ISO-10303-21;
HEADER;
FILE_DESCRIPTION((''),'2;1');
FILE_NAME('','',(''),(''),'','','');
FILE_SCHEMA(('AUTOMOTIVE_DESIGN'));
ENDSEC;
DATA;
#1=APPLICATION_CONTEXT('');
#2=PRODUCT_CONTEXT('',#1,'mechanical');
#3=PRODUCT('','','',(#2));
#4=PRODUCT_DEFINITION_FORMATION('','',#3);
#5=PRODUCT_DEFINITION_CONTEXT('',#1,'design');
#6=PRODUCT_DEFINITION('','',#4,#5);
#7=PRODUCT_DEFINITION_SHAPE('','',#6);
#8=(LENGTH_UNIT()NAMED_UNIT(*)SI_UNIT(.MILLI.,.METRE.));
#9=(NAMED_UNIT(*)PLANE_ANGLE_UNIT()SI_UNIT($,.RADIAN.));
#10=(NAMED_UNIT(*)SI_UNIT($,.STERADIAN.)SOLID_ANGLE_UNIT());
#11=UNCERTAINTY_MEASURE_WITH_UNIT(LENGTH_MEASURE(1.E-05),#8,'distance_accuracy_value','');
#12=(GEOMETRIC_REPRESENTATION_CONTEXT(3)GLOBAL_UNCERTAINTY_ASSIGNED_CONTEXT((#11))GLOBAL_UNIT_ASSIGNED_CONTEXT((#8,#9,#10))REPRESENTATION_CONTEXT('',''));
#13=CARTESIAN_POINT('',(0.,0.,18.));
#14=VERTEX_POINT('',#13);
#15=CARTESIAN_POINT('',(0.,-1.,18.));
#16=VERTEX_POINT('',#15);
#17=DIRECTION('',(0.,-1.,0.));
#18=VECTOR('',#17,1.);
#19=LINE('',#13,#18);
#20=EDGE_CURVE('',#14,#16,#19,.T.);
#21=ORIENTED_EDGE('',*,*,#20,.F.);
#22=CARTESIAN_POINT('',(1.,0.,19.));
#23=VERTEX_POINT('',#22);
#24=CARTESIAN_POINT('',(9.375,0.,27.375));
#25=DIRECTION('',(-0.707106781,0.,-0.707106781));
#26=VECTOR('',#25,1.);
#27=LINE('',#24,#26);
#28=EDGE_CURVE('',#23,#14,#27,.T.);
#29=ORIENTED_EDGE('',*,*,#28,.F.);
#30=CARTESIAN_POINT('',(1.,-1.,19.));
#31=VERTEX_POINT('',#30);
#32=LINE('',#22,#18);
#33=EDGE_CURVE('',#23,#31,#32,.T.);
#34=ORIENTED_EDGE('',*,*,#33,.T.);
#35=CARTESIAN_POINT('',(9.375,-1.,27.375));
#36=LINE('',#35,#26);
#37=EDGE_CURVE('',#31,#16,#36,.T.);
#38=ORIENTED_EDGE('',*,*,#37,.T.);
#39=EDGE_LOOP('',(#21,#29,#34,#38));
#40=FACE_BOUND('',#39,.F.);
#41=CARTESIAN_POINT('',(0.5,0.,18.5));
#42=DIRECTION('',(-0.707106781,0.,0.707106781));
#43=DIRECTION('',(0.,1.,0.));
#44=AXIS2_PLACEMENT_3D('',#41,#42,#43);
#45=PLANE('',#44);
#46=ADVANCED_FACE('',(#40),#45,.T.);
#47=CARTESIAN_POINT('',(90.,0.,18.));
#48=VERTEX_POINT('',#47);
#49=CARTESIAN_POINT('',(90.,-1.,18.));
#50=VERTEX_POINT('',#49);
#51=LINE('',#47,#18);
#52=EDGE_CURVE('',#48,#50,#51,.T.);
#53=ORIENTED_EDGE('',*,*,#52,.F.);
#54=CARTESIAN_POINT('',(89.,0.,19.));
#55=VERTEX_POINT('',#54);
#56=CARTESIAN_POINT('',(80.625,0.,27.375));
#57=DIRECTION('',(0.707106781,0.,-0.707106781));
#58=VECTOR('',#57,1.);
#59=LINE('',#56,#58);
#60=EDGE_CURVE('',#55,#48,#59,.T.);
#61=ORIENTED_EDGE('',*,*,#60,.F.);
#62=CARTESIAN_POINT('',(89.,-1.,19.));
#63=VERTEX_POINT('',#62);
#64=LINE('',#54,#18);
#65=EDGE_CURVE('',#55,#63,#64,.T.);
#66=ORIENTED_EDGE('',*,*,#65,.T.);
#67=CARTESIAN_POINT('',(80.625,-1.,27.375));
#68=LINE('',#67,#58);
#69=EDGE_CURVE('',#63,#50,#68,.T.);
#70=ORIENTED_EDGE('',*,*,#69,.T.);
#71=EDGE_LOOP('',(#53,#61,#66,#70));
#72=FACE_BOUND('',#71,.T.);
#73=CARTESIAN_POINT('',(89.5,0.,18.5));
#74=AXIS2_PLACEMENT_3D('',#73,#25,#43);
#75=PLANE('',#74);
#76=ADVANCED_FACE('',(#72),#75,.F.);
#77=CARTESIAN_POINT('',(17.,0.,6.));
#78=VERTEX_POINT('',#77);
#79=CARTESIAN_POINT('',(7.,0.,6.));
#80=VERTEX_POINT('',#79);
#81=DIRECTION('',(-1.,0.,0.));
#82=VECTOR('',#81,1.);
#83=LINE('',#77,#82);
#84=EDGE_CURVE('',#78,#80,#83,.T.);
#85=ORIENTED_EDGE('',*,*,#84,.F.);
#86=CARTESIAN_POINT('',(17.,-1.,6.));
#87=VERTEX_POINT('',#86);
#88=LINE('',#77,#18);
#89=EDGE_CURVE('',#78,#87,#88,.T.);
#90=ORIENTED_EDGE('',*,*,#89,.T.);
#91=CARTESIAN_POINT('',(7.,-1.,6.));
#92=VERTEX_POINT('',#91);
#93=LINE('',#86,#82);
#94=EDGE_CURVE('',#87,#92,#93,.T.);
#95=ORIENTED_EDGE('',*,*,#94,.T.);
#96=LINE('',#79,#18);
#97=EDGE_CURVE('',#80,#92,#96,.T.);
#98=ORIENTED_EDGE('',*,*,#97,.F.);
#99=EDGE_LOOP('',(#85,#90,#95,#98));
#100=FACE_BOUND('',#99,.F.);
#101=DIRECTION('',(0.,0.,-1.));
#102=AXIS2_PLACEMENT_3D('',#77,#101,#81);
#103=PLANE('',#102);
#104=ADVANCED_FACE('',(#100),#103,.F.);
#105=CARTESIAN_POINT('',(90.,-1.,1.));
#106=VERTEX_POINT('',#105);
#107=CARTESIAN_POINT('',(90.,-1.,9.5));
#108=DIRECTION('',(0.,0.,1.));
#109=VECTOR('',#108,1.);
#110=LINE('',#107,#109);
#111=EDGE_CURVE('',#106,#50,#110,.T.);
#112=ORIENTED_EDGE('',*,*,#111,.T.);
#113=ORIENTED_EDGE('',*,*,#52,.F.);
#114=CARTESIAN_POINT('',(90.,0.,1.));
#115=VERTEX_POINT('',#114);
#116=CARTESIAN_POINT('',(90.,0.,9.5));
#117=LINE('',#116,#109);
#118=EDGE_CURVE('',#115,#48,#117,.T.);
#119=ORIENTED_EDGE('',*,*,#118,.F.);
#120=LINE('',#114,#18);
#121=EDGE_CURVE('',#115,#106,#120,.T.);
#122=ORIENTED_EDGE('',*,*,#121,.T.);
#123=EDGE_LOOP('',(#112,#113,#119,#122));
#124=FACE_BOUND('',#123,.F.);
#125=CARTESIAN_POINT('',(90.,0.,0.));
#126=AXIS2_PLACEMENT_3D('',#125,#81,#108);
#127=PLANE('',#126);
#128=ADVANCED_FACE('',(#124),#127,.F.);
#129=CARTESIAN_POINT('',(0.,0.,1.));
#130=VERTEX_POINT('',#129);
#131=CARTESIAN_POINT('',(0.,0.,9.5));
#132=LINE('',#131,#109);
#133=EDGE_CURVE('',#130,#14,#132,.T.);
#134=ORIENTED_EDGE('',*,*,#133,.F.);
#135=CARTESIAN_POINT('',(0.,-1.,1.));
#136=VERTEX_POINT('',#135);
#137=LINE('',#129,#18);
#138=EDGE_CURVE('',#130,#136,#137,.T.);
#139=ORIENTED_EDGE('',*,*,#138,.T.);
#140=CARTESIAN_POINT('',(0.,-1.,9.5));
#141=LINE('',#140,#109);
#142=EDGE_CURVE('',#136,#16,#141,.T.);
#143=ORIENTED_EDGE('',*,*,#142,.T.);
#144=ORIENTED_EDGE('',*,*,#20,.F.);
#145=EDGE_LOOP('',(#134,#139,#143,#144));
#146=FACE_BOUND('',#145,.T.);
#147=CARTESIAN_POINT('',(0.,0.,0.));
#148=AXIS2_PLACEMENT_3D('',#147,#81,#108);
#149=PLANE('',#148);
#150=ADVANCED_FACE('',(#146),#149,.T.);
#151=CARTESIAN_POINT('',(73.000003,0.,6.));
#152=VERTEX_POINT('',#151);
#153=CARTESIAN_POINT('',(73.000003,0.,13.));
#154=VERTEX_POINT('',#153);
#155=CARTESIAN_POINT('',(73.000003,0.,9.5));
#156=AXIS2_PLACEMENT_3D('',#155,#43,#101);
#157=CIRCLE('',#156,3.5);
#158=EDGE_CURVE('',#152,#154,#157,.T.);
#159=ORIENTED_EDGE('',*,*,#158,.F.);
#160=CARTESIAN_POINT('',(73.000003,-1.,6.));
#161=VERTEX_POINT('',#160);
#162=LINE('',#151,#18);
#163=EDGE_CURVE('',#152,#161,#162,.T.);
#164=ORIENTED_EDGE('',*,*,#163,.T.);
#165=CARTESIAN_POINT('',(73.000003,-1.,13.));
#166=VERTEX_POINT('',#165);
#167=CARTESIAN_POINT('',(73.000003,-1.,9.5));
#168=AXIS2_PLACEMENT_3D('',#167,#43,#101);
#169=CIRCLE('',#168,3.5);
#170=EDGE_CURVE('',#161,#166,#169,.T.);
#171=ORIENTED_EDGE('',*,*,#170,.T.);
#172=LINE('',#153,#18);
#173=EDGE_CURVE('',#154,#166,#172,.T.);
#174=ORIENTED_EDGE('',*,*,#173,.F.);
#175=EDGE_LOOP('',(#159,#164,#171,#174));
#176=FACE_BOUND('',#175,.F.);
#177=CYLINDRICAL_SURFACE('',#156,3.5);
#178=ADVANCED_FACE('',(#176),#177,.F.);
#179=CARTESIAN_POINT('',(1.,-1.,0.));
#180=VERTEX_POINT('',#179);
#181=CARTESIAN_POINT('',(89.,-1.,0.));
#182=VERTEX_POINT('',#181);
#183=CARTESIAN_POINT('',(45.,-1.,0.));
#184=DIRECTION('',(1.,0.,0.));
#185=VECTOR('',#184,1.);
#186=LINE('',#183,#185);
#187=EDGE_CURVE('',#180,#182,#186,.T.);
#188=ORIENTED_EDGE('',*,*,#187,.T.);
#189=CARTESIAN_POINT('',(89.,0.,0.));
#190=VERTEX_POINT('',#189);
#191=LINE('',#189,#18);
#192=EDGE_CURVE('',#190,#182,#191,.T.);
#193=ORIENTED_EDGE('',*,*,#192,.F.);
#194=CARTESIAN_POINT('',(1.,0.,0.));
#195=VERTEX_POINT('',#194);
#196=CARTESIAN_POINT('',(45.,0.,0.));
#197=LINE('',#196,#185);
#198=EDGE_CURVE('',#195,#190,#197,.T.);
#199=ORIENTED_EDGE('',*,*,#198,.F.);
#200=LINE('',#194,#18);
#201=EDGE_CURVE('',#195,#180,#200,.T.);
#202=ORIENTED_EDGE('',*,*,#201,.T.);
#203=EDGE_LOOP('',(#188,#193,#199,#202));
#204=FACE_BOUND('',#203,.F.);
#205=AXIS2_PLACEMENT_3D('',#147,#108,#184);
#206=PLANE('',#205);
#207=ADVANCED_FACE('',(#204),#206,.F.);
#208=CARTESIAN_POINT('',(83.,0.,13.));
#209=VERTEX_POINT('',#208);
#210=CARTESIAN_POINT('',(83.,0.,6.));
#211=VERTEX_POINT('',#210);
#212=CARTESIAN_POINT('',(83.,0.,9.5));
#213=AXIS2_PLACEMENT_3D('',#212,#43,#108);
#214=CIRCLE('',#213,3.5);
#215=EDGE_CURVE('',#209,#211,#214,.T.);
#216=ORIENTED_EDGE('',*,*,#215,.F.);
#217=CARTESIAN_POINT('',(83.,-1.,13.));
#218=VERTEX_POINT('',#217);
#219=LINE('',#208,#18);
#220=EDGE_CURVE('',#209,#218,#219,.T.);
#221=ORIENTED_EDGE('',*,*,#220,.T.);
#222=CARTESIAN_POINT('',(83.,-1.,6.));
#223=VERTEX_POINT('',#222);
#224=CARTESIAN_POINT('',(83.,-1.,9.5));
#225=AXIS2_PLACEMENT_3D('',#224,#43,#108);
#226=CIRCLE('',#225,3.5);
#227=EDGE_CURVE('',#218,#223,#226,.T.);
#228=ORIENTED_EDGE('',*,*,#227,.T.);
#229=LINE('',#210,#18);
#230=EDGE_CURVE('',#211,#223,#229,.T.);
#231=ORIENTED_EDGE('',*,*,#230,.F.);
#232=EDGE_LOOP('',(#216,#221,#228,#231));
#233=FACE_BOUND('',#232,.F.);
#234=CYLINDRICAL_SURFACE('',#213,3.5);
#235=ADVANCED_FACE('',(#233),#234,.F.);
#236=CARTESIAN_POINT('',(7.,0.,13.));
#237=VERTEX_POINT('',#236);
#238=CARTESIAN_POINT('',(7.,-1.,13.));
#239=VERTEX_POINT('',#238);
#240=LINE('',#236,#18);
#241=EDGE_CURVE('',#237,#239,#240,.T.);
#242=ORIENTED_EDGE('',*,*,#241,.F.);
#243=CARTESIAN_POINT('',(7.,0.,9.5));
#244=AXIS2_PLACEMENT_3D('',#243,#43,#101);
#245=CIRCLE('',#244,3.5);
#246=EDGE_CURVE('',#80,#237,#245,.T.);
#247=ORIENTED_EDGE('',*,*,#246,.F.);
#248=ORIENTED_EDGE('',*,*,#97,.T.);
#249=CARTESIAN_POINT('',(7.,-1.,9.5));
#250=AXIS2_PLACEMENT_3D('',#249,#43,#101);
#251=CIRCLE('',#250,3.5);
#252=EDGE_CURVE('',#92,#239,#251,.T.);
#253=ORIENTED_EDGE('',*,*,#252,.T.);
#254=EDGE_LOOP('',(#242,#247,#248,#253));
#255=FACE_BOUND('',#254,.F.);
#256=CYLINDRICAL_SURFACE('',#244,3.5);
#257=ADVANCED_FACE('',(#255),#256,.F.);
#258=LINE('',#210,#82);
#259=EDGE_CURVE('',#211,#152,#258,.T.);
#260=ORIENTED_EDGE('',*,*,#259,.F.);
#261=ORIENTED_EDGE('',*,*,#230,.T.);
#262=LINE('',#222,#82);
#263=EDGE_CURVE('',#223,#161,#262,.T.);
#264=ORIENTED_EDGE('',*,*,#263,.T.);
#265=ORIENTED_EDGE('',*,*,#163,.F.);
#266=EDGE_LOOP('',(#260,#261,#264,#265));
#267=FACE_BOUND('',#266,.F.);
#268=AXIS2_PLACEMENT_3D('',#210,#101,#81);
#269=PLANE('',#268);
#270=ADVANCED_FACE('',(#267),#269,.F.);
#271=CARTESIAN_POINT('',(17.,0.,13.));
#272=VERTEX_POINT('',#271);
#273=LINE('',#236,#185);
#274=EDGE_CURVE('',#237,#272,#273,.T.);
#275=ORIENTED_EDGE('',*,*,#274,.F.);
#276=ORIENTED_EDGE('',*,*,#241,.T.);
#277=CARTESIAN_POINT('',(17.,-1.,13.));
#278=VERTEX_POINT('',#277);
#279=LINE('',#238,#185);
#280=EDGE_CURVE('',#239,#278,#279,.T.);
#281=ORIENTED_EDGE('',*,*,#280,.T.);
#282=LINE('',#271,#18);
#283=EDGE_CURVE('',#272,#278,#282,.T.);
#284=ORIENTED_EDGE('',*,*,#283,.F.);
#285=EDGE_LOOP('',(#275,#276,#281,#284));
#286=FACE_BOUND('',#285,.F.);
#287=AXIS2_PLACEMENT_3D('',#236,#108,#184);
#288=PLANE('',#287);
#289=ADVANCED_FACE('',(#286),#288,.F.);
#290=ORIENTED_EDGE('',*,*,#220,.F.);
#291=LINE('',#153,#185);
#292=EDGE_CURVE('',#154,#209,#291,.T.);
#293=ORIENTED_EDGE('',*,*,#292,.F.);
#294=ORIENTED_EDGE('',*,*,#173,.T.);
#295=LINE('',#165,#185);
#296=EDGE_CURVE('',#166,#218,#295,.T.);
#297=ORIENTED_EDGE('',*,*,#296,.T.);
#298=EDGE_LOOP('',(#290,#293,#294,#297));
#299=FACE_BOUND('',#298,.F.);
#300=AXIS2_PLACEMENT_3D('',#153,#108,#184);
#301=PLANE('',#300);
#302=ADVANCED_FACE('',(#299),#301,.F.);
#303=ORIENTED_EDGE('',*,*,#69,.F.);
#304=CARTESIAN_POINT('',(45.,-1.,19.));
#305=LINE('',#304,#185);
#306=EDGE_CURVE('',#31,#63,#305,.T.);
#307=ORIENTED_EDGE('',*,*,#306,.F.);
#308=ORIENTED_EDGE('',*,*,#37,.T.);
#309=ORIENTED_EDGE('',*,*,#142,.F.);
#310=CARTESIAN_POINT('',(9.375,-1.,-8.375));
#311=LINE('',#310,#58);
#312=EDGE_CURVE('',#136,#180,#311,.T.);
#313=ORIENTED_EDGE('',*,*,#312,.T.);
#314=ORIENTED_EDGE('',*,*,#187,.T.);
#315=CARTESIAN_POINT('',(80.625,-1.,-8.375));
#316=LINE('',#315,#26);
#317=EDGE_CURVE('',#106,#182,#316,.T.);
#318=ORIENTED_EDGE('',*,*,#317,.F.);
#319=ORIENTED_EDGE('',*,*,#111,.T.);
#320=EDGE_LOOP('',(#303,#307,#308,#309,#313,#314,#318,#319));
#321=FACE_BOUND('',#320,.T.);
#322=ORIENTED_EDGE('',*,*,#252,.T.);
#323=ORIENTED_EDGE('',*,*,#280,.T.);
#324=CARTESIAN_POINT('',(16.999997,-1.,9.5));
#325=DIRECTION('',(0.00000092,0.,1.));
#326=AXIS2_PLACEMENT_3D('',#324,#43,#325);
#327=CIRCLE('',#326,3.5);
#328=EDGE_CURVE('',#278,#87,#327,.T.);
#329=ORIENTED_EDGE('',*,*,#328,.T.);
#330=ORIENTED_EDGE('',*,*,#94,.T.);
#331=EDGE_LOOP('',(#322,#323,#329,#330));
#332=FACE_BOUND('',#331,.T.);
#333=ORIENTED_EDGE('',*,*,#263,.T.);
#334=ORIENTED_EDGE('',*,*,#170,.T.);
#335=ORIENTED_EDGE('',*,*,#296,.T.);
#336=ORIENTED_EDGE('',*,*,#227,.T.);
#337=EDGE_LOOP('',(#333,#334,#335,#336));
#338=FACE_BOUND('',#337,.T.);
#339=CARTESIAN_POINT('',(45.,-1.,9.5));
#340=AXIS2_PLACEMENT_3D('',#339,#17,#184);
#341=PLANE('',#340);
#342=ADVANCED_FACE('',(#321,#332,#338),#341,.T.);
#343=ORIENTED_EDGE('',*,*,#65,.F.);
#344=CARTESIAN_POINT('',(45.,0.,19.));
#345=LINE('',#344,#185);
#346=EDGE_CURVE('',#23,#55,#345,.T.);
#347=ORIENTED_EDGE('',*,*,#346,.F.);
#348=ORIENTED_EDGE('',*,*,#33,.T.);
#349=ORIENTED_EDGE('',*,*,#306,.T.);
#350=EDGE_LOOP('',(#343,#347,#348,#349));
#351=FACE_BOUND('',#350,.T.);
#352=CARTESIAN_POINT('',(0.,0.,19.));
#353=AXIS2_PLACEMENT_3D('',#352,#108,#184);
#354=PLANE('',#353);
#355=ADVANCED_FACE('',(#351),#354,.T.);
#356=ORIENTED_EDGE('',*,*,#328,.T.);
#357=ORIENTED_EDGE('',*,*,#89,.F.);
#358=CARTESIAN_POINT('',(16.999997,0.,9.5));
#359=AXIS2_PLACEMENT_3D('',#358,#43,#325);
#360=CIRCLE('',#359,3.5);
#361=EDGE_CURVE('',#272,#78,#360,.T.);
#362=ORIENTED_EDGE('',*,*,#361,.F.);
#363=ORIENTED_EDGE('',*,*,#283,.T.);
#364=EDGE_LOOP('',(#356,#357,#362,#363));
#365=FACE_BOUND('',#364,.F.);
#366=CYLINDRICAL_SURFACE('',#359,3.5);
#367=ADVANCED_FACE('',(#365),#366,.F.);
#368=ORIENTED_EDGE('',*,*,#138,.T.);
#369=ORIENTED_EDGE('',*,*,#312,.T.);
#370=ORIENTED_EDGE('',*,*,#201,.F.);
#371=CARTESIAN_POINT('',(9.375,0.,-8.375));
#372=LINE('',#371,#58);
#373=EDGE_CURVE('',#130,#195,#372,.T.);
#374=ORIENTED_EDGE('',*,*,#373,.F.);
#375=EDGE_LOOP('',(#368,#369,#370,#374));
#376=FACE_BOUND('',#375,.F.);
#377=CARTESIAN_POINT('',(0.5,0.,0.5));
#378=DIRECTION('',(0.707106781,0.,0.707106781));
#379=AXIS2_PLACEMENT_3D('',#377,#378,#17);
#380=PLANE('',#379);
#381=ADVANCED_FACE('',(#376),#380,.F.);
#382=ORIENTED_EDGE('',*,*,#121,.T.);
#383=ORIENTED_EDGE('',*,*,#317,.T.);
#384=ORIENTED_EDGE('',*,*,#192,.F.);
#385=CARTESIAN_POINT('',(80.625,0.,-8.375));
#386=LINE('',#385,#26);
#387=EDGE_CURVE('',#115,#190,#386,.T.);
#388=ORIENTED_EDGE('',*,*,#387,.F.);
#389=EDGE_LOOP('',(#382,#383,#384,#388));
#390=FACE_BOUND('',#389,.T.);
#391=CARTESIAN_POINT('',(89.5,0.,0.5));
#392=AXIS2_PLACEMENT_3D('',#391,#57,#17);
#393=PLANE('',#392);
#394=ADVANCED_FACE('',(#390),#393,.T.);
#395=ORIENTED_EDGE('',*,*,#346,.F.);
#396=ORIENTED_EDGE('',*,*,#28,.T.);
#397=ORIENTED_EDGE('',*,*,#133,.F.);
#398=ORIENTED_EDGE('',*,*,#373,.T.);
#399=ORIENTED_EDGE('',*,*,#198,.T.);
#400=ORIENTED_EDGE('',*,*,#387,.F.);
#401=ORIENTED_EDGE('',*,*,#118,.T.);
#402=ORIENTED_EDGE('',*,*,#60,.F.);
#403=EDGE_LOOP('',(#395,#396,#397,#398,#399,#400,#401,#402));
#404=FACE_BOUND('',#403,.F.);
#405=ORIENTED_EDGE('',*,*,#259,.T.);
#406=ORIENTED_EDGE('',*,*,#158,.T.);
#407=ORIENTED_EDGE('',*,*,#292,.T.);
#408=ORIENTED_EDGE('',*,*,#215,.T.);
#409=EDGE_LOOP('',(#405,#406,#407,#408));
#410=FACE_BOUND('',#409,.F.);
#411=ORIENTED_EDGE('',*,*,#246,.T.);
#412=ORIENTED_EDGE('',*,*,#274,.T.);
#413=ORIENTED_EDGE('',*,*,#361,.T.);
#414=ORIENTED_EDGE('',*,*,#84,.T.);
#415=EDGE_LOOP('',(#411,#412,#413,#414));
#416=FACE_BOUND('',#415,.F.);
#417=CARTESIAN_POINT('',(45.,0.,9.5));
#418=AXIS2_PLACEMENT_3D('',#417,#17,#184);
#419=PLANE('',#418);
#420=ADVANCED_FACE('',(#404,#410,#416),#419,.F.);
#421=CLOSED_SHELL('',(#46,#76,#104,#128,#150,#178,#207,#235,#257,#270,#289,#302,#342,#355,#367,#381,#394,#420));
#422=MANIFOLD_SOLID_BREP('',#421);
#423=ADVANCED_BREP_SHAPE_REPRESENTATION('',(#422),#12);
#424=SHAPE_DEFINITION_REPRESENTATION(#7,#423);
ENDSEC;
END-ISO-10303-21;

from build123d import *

# Parameters (mm, degrees)
F0_W     = 90
F0_H     = 19
F1_DEPTH = 1
F2_SIZE  = 1
F3_SIZE  = 1
F4_SIZE  = 1
F5_SIZE  = 1


# Not quite as in the source:
# - ends of sketch curves that miss each other by under 0.0002 mm in the source are joined


with BuildPart() as f1:
    # F0 (on Front) → F1 (new body)
    with BuildSketch(Plane.XZ):
        with Locations((45, 9.5)):
            Rectangle(F0_W, F0_H)
        with BuildLine():
            Line((17, 6), (7, 6))
            ThreePointArc((7, 6), (3.5, 9.5), (7, 13))
            Line((7, 13), (17, 13))
            ThreePointArc((17, 13), (20.4999967813, 9.5), (17, 6))
        make_face(mode=Mode.SUBTRACT)
        with BuildLine():
            ThreePointArc((83, 13), (86.5, 9.5), (83, 6))
            Line((83, 6), (73.0000032187, 6))
            ThreePointArc((73.0000032187, 6), (69.5000032187, 9.5), (73.0000032187, 13))
            Line((73.0000032187, 13), (83, 13))
        make_face(mode=Mode.SUBTRACT)
    extrude(amount=F1_DEPTH)

    # F2
    f2_edges = [f1.edges().sort_by_distance(p)[0] for p in [
        (90, -0.5, 19),
    ]]
    chamfer(f2_edges, length=F2_SIZE)

    # F3
    f3_edges = [f1.edges().sort_by_distance(p)[0] for p in [
        (90, -0.5, 0),
    ]]
    chamfer(f3_edges, length=F3_SIZE)

    # F4
    f4_edges = [f1.edges().sort_by_distance(p)[0] for p in [
        (0, -0.5, 19),
    ]]
    chamfer(f4_edges, length=F4_SIZE)

    # F5
    f5_edges = [f1.edges().sort_by_distance(p)[0] for p in [
        (0, -0.5, 0),
    ]]
    chamfer(f5_edges, length=F5_SIZE)


solid = f1.part
